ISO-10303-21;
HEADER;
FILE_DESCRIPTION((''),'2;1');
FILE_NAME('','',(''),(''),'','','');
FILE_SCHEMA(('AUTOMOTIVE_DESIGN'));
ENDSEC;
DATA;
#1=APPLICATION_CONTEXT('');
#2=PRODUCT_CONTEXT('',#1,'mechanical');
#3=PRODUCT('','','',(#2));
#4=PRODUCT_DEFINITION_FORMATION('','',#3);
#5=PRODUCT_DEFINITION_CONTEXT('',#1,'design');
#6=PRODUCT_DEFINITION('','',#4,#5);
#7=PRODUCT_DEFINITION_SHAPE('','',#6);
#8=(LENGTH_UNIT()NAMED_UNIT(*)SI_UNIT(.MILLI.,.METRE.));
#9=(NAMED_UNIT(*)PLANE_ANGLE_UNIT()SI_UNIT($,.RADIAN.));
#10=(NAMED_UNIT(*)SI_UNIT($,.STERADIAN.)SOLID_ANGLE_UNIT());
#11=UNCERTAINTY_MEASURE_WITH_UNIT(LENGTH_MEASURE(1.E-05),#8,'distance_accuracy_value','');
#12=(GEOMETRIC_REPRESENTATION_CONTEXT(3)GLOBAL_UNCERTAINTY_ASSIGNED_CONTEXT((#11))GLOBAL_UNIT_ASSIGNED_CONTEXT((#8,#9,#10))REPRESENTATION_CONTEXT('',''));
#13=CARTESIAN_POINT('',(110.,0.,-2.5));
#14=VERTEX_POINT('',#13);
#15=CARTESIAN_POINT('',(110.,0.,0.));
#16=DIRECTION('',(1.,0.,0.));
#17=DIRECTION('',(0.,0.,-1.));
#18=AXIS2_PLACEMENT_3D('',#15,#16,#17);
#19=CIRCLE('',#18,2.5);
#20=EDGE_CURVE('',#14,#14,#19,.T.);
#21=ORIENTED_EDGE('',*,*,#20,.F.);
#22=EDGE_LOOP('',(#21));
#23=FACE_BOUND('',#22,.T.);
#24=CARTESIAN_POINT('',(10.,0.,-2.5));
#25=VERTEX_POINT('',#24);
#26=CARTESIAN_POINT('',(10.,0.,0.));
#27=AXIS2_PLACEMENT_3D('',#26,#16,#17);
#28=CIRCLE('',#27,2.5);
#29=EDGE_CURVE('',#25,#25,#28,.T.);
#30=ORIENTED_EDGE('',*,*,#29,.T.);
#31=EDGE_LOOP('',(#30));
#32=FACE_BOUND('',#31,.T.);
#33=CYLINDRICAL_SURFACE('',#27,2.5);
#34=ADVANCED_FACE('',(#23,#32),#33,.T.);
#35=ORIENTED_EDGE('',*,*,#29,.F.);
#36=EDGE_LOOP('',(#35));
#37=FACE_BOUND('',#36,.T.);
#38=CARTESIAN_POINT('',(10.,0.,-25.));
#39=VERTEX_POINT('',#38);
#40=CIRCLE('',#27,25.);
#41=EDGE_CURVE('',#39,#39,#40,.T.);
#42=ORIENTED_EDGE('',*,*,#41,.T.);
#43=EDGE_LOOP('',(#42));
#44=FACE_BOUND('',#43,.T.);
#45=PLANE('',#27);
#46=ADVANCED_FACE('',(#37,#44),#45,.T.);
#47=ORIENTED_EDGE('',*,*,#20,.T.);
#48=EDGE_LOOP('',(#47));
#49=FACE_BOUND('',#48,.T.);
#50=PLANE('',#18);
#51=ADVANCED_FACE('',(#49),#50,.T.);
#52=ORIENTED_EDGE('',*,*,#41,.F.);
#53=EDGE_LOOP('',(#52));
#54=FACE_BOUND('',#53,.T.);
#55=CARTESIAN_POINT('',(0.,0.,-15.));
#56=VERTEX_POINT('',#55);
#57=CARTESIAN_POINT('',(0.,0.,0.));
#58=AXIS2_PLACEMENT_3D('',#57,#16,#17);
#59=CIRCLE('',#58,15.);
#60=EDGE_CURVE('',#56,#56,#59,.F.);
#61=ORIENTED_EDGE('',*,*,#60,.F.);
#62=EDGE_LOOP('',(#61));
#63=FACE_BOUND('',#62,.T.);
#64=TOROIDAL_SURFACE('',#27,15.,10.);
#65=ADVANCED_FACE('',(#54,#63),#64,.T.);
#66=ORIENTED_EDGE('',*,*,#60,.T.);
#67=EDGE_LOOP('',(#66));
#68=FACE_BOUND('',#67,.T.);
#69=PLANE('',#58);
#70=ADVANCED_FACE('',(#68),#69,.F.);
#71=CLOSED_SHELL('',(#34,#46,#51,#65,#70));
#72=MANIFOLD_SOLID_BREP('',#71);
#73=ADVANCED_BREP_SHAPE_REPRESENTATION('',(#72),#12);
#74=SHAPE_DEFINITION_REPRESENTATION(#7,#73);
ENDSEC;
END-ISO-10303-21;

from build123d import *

# Parameters (mm, degrees)
SKETCH1_R           = 25
BOSS_EXTRUDE1_DEPTH = 110
CUT_EXTRUDE1_START  = -100
SKETCH2_R           = 25
SKETCH2_R_2         = 2.5
CUT_EXTRUDE1_DEPTH  = 100
FILLET1_R           = 10


with BuildPart() as part:
    # Sketch1 → Boss-Extrude1 (new body)
    with BuildSketch(Plane(origin=(0, 0, 0), x_dir=(0, 0, -1), z_dir=(1, 0, 0))):
        Circle(SKETCH1_R)
    extrude(amount=BOSS_EXTRUDE1_DEPTH)

    # Sketch2 → Cut-Extrude1 (cut)
    with BuildSketch(Plane(origin=(110, 0, 0), x_dir=(0, 0, -1), z_dir=(1, 0, 0)).offset(CUT_EXTRUDE1_START)):
        Circle(SKETCH2_R)
        Circle(SKETCH2_R_2, mode=Mode.SUBTRACT)
    extrude(amount=CUT_EXTRUDE1_DEPTH, mode=Mode.SUBTRACT)

    # Fillet1
    fillet1_edges = [part.edges().sort_by_distance(p)[0] for p in [
        (0, 0, 25),
    ]]
    fillet(fillet1_edges, radius=FILLET1_R - 0.0001)  # a hair under: the kernel refuses the full size


solid = part.part
